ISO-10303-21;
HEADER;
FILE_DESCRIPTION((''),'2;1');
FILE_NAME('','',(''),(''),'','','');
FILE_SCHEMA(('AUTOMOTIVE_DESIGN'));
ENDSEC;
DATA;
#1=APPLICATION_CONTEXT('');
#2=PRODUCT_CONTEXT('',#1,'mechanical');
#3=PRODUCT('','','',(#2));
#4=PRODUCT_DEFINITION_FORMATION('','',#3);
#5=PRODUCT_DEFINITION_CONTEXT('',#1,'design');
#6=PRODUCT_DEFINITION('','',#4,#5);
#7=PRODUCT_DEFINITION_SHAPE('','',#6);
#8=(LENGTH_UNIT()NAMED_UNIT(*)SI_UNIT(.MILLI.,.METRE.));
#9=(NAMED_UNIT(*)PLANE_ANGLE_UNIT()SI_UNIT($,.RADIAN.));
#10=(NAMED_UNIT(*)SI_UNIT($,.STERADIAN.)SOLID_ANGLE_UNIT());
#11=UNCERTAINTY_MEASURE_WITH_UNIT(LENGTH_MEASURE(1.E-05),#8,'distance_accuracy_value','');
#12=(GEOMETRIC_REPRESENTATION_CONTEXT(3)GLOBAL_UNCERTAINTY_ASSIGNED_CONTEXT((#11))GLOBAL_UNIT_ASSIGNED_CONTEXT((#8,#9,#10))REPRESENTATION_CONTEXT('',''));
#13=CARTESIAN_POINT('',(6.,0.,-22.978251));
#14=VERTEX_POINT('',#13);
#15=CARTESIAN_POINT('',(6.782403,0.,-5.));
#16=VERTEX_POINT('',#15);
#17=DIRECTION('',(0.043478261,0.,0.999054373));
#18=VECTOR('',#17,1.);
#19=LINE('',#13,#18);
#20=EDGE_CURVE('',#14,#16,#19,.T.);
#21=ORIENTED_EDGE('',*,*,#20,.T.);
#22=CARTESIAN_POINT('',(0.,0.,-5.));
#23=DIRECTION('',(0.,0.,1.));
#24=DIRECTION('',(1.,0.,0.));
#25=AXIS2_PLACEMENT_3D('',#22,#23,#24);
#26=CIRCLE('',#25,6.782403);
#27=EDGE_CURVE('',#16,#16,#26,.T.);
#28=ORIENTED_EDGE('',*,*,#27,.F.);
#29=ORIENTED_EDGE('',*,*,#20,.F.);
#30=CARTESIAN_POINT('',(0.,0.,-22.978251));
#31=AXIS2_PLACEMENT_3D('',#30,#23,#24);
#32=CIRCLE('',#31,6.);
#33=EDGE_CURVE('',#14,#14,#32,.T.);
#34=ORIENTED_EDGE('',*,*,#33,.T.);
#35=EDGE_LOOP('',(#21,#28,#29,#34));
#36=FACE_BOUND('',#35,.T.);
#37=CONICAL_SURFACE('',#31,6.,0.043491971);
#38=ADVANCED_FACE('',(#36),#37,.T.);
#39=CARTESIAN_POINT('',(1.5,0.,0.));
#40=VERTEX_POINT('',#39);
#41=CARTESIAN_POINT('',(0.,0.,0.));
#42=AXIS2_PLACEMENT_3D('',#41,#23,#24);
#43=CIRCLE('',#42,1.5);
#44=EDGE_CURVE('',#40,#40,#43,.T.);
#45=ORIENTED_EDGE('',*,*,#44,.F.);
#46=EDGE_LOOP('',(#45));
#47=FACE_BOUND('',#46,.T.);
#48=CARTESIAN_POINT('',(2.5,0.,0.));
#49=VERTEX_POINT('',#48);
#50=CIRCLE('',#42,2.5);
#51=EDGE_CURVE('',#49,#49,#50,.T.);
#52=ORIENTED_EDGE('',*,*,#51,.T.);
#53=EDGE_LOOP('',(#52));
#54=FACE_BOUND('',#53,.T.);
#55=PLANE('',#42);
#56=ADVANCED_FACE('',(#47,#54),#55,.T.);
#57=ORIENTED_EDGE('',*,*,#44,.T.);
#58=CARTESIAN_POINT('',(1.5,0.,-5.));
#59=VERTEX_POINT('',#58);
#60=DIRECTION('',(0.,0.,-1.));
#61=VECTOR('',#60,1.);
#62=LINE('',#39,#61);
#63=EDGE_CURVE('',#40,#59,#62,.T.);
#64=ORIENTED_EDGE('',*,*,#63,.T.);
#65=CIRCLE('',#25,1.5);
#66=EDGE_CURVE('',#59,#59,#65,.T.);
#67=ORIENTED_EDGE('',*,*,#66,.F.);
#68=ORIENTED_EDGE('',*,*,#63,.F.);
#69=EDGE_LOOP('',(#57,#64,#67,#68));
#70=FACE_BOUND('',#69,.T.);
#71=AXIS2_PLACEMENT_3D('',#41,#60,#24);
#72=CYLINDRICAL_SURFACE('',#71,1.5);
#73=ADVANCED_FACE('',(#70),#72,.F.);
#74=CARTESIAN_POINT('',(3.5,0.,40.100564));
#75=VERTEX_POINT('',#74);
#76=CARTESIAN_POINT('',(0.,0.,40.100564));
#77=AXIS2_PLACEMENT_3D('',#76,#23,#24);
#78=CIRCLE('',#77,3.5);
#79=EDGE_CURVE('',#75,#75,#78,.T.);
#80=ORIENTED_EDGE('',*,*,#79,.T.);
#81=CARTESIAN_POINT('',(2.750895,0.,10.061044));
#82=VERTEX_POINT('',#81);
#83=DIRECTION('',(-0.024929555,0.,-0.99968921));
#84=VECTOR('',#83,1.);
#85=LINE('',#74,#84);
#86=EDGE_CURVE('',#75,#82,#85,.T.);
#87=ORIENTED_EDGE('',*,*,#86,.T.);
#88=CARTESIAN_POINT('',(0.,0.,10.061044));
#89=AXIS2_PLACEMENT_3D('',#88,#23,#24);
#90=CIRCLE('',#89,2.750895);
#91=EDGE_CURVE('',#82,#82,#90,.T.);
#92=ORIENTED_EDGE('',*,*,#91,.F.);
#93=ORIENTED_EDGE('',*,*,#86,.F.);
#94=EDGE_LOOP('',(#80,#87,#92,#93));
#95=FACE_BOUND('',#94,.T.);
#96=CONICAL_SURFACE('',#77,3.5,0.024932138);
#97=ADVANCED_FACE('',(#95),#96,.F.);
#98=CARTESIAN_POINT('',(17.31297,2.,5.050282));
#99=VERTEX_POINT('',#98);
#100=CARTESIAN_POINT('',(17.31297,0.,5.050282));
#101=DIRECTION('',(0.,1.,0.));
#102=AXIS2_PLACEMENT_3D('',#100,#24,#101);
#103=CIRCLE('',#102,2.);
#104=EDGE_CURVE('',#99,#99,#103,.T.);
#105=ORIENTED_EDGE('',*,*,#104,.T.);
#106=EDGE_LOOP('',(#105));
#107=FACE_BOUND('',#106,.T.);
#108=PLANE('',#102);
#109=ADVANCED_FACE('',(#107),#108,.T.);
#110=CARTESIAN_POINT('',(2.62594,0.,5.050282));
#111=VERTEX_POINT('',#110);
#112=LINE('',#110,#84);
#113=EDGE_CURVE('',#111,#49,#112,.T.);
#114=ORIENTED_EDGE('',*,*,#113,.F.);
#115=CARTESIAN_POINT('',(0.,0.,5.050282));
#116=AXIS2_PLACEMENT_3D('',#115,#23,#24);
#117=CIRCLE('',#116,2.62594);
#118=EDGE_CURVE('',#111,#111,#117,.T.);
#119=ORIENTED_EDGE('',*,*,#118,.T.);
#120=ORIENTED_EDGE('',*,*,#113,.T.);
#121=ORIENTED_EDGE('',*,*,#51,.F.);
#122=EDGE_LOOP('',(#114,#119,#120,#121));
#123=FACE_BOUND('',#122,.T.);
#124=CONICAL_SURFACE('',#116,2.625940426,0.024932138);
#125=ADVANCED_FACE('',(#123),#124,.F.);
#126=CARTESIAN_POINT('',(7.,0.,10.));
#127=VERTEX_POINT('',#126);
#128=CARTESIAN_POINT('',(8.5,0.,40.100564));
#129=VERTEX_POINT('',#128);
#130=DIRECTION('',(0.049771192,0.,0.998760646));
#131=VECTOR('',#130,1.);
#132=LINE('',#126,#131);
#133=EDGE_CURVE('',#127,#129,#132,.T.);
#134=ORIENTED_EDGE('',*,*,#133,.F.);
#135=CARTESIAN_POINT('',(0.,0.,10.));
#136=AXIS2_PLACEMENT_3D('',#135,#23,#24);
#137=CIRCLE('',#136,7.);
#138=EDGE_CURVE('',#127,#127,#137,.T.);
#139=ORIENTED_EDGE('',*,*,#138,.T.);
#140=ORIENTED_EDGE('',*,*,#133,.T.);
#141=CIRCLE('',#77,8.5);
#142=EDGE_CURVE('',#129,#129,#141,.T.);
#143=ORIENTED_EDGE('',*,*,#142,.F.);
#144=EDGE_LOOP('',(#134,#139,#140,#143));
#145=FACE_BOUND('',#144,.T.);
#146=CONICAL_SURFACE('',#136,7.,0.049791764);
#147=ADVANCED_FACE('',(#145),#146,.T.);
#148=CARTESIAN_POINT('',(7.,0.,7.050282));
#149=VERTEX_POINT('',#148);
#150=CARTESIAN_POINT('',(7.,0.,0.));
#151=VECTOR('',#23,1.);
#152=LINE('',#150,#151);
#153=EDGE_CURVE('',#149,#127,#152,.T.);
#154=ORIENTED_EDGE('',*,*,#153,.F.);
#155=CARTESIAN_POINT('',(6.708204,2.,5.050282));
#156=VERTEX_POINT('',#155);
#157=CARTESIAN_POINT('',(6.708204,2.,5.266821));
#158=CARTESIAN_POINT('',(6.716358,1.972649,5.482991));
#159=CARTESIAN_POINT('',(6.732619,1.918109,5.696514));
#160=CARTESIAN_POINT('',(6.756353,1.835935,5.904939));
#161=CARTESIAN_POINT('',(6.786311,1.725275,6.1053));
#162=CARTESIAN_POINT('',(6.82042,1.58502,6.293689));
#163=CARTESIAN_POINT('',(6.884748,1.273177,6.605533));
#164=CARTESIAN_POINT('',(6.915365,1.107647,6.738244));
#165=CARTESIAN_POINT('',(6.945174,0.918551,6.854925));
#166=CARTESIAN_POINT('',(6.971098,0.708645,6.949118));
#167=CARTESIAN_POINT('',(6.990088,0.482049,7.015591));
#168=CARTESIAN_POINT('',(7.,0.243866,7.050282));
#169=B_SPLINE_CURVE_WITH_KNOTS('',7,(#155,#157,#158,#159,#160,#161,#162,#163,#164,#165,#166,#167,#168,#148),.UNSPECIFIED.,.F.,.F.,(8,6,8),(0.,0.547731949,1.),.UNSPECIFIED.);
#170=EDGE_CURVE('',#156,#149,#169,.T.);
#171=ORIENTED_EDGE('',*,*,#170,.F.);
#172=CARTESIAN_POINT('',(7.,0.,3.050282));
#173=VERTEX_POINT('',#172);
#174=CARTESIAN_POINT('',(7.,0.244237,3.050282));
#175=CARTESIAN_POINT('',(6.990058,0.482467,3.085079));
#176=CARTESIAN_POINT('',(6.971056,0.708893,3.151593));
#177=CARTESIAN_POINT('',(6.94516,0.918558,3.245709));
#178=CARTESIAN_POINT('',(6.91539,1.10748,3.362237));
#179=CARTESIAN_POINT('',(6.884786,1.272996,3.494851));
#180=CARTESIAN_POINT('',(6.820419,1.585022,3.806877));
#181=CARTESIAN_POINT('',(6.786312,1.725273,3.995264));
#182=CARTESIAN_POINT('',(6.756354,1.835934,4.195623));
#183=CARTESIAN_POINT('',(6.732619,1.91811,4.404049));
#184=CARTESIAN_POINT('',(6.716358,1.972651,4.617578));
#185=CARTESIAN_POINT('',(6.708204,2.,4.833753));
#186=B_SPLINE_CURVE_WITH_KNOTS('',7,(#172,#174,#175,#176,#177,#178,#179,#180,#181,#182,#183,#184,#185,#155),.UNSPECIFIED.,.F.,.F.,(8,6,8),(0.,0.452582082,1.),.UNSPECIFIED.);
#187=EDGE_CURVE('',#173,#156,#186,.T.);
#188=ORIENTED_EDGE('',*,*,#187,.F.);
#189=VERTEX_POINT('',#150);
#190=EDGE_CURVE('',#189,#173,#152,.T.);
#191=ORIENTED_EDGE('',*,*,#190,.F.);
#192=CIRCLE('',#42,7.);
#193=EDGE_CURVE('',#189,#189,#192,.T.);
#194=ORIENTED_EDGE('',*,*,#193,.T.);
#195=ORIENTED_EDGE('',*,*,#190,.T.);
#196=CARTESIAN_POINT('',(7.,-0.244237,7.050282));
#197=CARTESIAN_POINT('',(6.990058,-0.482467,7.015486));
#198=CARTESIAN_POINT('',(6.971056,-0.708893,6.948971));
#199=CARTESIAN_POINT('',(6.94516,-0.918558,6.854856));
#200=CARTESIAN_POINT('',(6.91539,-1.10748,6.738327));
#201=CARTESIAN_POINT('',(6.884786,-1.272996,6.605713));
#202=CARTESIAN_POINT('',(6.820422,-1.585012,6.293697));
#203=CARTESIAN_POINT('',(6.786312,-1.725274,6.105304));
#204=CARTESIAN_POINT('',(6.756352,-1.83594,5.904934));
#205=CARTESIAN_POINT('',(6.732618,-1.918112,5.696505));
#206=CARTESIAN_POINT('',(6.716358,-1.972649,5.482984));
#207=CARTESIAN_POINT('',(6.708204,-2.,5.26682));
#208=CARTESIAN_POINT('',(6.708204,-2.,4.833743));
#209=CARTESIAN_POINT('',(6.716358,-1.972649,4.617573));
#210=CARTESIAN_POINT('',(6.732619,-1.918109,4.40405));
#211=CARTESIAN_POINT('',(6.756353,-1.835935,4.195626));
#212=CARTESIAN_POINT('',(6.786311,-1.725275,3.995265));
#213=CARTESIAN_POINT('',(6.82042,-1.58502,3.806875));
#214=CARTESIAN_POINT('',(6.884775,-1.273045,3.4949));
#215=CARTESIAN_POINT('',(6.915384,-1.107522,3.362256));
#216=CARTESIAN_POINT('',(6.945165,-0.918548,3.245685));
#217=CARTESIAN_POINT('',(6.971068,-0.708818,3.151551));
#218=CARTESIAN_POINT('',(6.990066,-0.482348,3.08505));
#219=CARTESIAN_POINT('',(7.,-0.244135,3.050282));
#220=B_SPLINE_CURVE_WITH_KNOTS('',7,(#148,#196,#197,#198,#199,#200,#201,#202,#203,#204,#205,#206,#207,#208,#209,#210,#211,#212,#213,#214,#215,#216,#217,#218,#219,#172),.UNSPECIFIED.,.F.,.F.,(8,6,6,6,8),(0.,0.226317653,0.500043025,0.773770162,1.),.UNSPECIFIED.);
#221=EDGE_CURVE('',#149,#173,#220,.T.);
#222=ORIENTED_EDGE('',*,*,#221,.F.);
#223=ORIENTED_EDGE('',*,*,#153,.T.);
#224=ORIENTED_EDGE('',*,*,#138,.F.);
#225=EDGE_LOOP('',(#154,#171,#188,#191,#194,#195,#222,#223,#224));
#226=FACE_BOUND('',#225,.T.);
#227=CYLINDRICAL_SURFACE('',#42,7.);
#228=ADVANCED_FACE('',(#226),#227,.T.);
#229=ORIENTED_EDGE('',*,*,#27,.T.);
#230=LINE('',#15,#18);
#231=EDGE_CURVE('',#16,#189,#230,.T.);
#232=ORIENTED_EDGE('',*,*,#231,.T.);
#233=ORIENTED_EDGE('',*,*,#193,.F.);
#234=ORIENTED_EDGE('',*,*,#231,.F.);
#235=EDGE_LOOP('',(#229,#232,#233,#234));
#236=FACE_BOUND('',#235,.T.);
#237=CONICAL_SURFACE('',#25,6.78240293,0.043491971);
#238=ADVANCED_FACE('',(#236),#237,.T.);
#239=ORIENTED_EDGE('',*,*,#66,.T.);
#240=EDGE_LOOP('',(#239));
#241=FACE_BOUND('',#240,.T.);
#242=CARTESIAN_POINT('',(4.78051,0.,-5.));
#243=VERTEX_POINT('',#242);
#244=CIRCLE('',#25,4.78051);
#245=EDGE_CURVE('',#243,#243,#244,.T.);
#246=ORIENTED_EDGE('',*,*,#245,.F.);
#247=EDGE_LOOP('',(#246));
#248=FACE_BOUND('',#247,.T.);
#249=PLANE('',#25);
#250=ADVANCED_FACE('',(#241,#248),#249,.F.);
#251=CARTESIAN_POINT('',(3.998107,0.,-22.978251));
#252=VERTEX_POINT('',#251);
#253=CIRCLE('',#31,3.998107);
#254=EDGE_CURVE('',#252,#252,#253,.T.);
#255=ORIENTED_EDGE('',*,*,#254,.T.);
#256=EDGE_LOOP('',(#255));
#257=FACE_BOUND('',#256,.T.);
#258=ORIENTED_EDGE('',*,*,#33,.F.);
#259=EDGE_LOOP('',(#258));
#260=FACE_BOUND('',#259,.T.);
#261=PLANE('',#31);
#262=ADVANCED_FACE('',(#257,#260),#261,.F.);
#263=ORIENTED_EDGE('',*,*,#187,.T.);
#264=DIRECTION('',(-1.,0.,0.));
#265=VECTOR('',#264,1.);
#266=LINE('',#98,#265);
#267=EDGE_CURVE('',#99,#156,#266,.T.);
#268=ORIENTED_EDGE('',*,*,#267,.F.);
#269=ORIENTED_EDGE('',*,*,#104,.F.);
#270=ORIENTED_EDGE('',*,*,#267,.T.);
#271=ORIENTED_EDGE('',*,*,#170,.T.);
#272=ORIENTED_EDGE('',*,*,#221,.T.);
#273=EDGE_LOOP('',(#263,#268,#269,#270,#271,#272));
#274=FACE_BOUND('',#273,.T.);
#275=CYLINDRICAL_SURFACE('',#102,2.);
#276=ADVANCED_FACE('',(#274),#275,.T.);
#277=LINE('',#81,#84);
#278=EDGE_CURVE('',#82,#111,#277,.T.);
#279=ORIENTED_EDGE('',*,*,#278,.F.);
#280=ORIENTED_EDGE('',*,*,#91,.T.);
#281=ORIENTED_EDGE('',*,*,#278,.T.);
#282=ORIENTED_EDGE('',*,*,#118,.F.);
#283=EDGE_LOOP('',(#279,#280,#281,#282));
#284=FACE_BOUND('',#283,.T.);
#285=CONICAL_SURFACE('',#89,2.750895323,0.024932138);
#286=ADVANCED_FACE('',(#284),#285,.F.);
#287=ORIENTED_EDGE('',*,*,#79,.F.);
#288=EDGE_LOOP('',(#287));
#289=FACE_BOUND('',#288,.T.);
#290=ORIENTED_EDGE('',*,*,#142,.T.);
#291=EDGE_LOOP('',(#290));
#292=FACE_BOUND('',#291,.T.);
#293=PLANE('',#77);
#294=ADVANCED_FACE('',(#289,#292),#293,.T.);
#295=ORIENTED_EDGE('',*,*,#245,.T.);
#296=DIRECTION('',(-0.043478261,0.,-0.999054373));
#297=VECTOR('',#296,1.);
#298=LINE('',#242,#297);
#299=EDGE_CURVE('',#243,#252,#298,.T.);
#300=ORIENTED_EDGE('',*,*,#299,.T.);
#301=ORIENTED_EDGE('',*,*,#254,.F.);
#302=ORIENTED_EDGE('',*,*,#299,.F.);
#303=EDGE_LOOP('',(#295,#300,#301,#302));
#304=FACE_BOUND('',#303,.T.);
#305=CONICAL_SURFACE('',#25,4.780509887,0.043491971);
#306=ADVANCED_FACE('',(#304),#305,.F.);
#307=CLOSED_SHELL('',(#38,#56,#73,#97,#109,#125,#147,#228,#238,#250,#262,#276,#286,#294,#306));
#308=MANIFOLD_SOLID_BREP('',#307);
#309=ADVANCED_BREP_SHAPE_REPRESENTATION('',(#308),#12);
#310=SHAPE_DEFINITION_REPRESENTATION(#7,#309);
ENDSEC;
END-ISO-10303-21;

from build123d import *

# Parameters (mm, degrees)
F3_R     = 2
F4_DEPTH = 12.6554723829


with BuildPart() as f1:
    # F0 (on Front) → F1 (revolve)
    with BuildSketch(Plane.XZ):
        Polygon((2.5, 0), (1.5, 0), (1.5, -5), (4.7805098866, -5), (6.7824029301, -5), (7, 0), align=None)
        Polygon((2.6259404258, 5.0502821417), (2.5, 0), (7, 0), (7, 5.0502821417), (4.8129702129, 5.0502821417), align=None)
        Polygon((2.7508953229, 10.0610440238), (2.6259404258, 5.0502821417), (4.8129702129, 5.0502821417), (7, 5.0502821417), (7, 10), align=None)
        Polygon((4.7805098866, -5), (3.9981069565, -22.9782505862), (6, -22.9782505862), (6.7824029301, -5), align=None)
        Polygon((3.5, 40.1005642833), (2.7508953229, 10.0610440238), (7, 10), (8.5, 40.1005642833), align=None)
    revolve(axis=Axis((0, 0, 25.1005642833), (0, 0, 1)))

    # F3 (on line) → F4 (join)
    with BuildSketch(Plane.YZ.offset(17.3129702129)):
        with Locations((0, 5.0502821417)):
            Circle(F3_R)
    extrude(amount=-F4_DEPTH)


solid = f1.part
